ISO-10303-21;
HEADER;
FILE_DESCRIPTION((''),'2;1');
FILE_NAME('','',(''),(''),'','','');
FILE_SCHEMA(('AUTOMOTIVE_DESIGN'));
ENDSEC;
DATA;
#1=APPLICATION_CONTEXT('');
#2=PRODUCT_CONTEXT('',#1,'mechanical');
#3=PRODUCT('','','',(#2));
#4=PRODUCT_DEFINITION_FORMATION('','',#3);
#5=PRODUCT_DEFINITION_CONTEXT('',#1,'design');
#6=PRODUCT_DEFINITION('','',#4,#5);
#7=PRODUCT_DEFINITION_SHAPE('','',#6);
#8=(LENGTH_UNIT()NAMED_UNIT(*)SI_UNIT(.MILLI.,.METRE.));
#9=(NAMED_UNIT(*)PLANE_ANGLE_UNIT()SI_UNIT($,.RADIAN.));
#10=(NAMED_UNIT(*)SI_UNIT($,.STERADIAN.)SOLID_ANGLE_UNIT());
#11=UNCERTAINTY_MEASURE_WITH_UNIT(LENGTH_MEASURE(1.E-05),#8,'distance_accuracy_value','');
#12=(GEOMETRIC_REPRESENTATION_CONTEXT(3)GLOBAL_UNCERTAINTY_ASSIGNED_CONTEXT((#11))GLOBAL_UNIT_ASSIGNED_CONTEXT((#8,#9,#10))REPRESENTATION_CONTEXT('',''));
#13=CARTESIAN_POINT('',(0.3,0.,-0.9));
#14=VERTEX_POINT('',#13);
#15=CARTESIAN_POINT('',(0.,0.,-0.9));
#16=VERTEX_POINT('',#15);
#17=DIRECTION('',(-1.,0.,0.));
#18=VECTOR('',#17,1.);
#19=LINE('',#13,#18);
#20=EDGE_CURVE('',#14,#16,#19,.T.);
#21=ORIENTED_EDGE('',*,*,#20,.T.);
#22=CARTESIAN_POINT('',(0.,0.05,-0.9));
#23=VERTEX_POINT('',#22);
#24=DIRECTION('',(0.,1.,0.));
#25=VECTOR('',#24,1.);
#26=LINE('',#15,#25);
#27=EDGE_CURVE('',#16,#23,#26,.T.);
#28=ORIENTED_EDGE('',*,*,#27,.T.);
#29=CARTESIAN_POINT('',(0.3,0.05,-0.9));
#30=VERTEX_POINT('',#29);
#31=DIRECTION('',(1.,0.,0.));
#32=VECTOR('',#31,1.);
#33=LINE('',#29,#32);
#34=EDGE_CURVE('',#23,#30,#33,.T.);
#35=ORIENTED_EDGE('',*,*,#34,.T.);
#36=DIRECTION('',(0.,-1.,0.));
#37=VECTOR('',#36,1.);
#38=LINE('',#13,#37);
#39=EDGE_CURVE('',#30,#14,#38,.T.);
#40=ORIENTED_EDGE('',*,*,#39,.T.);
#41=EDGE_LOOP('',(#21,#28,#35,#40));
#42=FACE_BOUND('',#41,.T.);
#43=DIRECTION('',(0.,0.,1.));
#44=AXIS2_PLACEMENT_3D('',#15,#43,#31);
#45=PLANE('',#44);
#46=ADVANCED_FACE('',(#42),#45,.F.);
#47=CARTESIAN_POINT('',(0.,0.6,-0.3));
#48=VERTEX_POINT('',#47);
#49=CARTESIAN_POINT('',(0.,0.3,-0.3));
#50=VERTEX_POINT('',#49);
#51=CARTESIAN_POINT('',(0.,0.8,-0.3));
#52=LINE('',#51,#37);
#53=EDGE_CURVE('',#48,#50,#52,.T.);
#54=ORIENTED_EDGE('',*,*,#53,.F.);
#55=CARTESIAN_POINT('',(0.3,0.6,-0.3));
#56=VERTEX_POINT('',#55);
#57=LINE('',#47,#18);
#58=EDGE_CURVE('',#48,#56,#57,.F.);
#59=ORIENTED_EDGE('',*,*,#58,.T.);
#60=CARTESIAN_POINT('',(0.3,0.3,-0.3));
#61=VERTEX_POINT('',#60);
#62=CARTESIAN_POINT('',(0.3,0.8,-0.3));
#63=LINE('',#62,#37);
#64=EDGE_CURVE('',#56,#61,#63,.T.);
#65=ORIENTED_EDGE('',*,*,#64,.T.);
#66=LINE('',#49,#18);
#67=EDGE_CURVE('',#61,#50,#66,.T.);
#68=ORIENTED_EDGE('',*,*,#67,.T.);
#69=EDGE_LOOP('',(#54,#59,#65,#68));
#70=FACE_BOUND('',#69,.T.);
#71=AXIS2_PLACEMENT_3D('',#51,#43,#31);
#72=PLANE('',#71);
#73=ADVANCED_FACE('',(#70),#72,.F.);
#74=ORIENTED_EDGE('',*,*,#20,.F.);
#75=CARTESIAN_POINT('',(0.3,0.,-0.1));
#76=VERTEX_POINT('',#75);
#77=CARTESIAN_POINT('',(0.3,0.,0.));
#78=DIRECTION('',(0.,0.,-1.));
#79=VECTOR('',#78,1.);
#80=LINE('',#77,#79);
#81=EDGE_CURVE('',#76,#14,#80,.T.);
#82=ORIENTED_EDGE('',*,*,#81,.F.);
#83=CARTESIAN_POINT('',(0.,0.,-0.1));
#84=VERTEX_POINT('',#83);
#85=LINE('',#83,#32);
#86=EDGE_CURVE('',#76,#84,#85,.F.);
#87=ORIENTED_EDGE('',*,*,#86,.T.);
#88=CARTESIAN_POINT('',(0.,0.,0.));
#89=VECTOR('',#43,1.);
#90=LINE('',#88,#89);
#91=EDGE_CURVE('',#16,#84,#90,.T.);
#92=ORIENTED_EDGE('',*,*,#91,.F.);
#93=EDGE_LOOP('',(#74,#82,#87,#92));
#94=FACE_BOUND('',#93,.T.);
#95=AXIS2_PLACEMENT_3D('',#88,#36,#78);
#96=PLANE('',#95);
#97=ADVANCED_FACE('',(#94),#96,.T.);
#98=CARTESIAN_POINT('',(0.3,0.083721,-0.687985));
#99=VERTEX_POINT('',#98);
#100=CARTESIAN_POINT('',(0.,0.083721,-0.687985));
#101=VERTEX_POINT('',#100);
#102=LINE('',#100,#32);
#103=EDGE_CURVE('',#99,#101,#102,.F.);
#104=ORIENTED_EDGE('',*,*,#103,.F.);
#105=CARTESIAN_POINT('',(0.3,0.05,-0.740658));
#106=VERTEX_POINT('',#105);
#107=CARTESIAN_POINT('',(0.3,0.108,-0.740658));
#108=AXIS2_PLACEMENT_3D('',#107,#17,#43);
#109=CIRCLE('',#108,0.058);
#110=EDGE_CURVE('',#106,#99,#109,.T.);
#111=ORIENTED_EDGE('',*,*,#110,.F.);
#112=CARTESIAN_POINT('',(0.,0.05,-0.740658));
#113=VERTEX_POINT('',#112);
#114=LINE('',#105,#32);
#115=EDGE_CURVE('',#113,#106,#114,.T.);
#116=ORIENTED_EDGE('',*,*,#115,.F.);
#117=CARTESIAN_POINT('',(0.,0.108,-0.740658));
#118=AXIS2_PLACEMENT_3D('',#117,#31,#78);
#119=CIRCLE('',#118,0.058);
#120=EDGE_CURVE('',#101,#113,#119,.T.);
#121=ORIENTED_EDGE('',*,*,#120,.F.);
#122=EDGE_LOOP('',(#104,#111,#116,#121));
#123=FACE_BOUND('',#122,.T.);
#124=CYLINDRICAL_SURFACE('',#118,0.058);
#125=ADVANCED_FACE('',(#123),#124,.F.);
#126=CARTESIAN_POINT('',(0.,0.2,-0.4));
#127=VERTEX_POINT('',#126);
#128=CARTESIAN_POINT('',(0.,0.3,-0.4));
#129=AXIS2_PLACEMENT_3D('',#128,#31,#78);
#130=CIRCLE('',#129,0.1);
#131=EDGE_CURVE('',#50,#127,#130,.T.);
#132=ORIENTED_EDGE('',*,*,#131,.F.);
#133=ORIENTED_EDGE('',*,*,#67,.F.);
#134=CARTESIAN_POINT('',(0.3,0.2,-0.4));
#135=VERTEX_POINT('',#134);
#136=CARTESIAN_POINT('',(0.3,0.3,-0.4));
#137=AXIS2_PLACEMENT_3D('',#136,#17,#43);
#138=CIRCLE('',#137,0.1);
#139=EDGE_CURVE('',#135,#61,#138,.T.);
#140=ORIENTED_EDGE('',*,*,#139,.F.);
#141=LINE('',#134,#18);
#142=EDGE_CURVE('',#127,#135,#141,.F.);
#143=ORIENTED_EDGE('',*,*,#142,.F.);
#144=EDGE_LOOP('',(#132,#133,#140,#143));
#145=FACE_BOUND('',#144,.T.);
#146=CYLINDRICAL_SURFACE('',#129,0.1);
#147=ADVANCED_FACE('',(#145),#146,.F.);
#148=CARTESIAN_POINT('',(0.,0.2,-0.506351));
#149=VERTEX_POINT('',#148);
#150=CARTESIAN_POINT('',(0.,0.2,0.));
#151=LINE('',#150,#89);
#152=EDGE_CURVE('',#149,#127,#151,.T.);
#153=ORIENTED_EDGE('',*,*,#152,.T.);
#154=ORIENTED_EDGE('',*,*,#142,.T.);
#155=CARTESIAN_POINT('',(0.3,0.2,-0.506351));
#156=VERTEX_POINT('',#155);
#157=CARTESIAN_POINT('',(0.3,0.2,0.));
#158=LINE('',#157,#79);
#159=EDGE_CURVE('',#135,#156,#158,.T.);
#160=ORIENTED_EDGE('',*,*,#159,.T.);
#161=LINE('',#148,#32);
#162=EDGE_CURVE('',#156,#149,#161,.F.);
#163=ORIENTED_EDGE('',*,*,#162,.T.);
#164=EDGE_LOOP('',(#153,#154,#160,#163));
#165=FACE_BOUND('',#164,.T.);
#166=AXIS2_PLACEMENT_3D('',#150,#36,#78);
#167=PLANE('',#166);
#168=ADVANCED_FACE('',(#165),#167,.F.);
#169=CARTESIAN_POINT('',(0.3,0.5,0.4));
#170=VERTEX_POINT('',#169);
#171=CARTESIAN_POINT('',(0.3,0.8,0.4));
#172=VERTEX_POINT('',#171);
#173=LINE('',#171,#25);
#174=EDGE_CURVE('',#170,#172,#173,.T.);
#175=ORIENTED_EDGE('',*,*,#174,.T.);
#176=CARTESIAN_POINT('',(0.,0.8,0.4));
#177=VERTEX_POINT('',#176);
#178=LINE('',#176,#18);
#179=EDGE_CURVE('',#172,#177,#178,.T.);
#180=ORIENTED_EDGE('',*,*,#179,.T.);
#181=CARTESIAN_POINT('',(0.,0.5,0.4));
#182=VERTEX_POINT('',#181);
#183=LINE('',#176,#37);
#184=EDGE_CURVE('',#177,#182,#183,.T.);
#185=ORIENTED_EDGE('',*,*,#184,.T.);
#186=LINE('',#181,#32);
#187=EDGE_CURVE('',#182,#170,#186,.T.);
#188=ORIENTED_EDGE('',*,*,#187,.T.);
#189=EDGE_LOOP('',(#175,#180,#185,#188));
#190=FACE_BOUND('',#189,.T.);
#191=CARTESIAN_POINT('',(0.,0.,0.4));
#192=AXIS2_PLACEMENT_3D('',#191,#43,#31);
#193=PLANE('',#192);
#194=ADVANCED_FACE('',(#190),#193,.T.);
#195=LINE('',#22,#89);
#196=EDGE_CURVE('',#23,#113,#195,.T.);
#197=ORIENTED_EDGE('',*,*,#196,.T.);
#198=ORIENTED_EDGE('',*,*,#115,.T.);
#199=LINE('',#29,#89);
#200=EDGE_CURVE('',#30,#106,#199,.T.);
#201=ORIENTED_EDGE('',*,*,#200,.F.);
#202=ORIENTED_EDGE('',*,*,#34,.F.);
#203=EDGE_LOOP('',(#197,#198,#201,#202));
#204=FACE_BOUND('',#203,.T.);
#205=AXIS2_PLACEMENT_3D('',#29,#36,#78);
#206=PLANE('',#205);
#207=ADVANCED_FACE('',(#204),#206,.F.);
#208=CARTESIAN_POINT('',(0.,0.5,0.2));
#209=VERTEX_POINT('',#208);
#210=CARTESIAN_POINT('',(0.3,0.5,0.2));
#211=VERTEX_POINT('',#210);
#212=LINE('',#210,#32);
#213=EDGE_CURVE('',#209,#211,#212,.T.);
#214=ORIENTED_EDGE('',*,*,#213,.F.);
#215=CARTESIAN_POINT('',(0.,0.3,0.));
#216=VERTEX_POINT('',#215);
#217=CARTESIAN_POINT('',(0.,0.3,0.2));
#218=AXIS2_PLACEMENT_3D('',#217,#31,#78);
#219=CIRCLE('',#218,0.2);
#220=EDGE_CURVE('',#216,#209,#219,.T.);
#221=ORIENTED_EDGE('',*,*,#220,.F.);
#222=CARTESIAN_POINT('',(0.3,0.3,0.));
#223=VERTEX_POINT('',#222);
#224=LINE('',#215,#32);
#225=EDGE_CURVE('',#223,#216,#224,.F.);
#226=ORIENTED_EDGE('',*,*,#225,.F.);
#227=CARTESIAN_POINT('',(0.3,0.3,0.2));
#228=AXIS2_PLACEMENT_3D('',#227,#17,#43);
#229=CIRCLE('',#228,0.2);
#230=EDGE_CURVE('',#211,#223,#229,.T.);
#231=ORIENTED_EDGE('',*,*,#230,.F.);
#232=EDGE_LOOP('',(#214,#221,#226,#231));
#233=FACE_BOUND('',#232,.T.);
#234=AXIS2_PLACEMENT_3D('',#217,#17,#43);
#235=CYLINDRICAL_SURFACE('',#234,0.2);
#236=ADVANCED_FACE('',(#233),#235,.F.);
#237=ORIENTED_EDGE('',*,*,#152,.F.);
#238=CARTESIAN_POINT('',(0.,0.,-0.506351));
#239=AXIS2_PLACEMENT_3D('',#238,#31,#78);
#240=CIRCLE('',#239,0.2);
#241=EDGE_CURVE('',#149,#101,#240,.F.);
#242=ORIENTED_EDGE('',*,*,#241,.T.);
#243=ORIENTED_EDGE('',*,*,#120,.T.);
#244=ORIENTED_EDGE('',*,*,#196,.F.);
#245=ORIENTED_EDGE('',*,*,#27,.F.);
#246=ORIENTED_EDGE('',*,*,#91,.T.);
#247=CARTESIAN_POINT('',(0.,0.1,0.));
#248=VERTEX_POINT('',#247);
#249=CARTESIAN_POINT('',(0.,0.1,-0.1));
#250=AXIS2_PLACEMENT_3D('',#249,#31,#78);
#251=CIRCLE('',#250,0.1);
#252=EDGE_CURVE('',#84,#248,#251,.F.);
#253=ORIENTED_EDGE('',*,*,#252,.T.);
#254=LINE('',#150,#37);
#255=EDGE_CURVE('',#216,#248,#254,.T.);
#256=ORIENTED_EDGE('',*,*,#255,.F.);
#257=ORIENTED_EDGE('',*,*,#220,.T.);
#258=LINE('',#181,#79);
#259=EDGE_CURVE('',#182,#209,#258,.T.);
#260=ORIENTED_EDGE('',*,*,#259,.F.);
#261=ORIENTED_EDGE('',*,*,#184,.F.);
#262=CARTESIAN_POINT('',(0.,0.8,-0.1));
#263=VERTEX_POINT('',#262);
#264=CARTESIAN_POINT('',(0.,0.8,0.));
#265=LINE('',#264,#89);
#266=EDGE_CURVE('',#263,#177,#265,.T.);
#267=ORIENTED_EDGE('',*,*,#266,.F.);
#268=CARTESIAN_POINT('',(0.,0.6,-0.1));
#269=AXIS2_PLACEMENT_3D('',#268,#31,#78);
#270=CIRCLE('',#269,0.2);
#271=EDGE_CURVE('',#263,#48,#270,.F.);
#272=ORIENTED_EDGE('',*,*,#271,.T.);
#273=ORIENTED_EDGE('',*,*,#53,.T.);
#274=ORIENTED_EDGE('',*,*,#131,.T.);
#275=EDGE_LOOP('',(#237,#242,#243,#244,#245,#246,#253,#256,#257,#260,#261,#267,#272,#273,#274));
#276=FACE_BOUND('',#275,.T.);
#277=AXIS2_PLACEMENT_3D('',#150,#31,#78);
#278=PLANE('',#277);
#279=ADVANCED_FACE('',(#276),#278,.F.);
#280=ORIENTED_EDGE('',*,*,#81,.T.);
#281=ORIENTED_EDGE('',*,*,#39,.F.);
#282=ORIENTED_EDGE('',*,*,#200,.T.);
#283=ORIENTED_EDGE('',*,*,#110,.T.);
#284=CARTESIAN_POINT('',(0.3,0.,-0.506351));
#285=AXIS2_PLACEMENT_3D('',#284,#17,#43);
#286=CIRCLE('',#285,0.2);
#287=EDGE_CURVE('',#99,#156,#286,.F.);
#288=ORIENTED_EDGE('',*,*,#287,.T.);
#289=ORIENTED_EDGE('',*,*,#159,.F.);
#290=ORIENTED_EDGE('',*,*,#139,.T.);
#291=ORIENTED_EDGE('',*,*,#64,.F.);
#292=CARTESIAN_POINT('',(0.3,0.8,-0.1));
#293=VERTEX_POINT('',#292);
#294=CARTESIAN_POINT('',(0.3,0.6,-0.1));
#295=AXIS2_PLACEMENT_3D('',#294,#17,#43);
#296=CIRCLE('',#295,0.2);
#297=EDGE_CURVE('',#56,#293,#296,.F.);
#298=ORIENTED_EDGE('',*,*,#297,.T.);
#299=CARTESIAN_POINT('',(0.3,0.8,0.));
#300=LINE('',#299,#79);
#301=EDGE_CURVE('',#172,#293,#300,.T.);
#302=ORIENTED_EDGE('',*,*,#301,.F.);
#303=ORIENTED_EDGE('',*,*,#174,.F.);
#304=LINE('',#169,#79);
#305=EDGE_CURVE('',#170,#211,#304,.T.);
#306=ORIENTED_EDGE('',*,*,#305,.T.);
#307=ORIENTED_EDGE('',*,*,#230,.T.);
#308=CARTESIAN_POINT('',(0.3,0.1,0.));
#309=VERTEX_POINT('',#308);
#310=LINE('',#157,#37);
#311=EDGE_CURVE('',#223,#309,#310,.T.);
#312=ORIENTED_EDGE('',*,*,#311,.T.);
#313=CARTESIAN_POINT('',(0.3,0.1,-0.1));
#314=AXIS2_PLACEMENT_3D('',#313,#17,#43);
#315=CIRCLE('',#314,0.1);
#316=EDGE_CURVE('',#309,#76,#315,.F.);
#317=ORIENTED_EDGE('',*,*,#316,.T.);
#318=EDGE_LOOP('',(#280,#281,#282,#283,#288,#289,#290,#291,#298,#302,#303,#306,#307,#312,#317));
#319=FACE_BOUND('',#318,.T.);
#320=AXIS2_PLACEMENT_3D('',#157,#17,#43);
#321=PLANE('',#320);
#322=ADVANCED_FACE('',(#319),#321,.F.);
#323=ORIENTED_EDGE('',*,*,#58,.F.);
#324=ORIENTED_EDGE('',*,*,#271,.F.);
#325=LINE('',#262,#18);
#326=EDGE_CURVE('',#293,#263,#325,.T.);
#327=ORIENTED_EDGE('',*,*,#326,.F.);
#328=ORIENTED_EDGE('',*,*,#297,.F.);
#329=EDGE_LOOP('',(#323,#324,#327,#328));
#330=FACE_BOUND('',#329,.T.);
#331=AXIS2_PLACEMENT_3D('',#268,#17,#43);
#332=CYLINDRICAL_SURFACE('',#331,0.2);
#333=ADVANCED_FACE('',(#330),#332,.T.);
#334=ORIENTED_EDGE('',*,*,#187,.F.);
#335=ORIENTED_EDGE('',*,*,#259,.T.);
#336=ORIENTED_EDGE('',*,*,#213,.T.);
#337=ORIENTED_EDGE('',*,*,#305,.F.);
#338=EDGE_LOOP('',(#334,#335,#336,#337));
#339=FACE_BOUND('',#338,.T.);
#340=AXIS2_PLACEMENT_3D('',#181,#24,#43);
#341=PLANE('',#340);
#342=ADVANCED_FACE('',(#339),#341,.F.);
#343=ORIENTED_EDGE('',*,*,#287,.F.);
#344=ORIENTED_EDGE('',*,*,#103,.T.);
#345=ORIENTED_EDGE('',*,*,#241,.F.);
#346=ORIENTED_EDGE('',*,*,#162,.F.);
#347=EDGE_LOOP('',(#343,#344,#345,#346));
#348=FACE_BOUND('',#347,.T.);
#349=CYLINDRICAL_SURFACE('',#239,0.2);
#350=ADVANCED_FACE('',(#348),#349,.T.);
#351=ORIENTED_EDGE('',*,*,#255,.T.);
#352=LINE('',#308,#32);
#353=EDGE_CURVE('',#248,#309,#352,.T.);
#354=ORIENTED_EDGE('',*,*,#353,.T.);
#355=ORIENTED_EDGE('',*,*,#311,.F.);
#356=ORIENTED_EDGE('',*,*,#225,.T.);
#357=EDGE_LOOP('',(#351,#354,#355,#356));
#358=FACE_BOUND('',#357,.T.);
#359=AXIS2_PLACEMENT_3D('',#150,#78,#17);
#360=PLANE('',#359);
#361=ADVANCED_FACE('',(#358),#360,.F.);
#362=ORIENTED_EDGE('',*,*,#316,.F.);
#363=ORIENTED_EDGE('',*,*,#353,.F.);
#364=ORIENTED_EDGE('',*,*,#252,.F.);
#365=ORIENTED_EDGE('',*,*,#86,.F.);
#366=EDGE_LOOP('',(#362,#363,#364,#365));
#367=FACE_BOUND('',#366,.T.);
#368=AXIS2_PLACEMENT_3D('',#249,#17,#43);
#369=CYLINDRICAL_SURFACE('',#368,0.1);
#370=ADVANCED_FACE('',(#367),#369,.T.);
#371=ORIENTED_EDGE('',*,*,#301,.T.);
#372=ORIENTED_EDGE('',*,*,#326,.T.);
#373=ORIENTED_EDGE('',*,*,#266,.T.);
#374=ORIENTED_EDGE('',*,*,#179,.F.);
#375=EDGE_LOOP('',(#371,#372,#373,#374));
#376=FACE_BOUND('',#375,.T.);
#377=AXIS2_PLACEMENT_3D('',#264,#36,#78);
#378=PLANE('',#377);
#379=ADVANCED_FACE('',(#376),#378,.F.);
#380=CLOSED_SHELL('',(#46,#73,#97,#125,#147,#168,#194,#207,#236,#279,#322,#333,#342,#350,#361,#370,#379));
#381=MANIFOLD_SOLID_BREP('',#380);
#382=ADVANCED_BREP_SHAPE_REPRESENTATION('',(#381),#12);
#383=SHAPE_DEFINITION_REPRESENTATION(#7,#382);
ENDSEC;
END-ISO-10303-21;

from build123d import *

# Parameters (mm, degrees)
ESQUISSE1_W        = 0.3
ESQUISSE1_H        = 0.7
BOSS_EXTRU_1_DEPTH = 0.2
ESQUISSE2_W        = 0.3
ESQUISSE2_H        = 0.3
BOSS_EXTRU_2_DEPTH = 0.6
ESQUISSE3_W        = 0.3
ESQUISSE3_H        = 0.3
BOSS_EXTRU_3_DEPTH = 0.4
CONG_1_R           = 0.2
CONG_2_R           = 0.1
ESQUISSE4_W        = 0.3
ESQUISSE4_H        = 0.05
BOSS_EXTRU_4_DEPTH = 0.2
CONG_6_R           = 0.2
CONG_7_R           = 0.058


with BuildPart() as part:
    # Esquisse1 → Boss.-Extru.1 (new body)
    with BuildSketch(Plane(origin=(0, 0, 0), x_dir=(1, 0, 0), z_dir=(0, 1, 0))):
        with Locations((0.15, 0.35)):
            Rectangle(ESQUISSE1_W, ESQUISSE1_H)
    extrude(amount=BOSS_EXTRU_1_DEPTH)

    # Esquisse2 → Boss.-Extru.2 (add)
    with BuildSketch(Plane(origin=(0, 0.2, 0), x_dir=(1, 0, 0), z_dir=(0, 1, 0))):
        with Locations((0.15, 0.15)):
            Rectangle(ESQUISSE2_W, ESQUISSE2_H)
    extrude(amount=BOSS_EXTRU_2_DEPTH)

    # Esquisse3 → Boss.-Extru.3 (add)
    with BuildSketch(Plane.XY):
        with Locations((0.15, 0.65)):
            Rectangle(ESQUISSE3_W, ESQUISSE3_H)
    extrude(amount=BOSS_EXTRU_3_DEPTH)

    # Congé1
    cong_1_edges = [part.edges().sort_by_distance(p)[0] for p in [
        (0.15, 0.8, -0.3),
        (0.15, 0.5, 0),
    ]]
    fillet(cong_1_edges, radius=CONG_1_R)

    # Congé2
    cong_2_edges = [part.edges().sort_by_distance(p)[0] for p in [
        (0.15, 0.2, -0.3),
        (0.15, 0, 0),
    ]]
    fillet(cong_2_edges, radius=CONG_2_R)

    # Esquisse4 → Boss.-Extru.4 (add)
    with BuildSketch(Plane(origin=(0, 0, -0.7), x_dir=(-1, 0, 0), z_dir=(0, 0, -1))):
        with Locations((-0.15, 0.025)):
            Rectangle(ESQUISSE4_W, ESQUISSE4_H)
    extrude(amount=BOSS_EXTRU_4_DEPTH)

    # Congé6
    # the kernel refuses this fillet: 0.2 mm, written as the material it takes off along each edge
    with BuildSketch(Plane(origin=(0.784122918, 0.2, -0.7), x_dir=(0, -1.0, 3.7700213321171e-11), z_dir=(-1, 0, 0))) as cong_6_piece_1:
        with BuildLine():
            CenterArc((0.2, 0.193649167), CONG_6_R, 179.999999998, 75.522487815)
            Line((0, 0.193649167), (-0.004, 0.193649167))
            Line((-0.004, 0.193649167), (-0.004, 0))
            Line((-0.004, 0), (0, -0.004))
            ThreePointArc((0, -0.004), (0.075, -0.004), (0.149, -0.003872983))
            Line((0.149, -0.003872983), (0.15, 0))
        make_face()
    extrude(amount=1.268245837, mode=Mode.SUBTRACT)

    # Congé7
    cong_7_edges = [part.edges().sort_by_distance(p)[0] for p in [
        (0.15, 0.05, -0.7),
    ]]
    fillet(cong_7_edges, radius=CONG_7_R)


solid = part.part
